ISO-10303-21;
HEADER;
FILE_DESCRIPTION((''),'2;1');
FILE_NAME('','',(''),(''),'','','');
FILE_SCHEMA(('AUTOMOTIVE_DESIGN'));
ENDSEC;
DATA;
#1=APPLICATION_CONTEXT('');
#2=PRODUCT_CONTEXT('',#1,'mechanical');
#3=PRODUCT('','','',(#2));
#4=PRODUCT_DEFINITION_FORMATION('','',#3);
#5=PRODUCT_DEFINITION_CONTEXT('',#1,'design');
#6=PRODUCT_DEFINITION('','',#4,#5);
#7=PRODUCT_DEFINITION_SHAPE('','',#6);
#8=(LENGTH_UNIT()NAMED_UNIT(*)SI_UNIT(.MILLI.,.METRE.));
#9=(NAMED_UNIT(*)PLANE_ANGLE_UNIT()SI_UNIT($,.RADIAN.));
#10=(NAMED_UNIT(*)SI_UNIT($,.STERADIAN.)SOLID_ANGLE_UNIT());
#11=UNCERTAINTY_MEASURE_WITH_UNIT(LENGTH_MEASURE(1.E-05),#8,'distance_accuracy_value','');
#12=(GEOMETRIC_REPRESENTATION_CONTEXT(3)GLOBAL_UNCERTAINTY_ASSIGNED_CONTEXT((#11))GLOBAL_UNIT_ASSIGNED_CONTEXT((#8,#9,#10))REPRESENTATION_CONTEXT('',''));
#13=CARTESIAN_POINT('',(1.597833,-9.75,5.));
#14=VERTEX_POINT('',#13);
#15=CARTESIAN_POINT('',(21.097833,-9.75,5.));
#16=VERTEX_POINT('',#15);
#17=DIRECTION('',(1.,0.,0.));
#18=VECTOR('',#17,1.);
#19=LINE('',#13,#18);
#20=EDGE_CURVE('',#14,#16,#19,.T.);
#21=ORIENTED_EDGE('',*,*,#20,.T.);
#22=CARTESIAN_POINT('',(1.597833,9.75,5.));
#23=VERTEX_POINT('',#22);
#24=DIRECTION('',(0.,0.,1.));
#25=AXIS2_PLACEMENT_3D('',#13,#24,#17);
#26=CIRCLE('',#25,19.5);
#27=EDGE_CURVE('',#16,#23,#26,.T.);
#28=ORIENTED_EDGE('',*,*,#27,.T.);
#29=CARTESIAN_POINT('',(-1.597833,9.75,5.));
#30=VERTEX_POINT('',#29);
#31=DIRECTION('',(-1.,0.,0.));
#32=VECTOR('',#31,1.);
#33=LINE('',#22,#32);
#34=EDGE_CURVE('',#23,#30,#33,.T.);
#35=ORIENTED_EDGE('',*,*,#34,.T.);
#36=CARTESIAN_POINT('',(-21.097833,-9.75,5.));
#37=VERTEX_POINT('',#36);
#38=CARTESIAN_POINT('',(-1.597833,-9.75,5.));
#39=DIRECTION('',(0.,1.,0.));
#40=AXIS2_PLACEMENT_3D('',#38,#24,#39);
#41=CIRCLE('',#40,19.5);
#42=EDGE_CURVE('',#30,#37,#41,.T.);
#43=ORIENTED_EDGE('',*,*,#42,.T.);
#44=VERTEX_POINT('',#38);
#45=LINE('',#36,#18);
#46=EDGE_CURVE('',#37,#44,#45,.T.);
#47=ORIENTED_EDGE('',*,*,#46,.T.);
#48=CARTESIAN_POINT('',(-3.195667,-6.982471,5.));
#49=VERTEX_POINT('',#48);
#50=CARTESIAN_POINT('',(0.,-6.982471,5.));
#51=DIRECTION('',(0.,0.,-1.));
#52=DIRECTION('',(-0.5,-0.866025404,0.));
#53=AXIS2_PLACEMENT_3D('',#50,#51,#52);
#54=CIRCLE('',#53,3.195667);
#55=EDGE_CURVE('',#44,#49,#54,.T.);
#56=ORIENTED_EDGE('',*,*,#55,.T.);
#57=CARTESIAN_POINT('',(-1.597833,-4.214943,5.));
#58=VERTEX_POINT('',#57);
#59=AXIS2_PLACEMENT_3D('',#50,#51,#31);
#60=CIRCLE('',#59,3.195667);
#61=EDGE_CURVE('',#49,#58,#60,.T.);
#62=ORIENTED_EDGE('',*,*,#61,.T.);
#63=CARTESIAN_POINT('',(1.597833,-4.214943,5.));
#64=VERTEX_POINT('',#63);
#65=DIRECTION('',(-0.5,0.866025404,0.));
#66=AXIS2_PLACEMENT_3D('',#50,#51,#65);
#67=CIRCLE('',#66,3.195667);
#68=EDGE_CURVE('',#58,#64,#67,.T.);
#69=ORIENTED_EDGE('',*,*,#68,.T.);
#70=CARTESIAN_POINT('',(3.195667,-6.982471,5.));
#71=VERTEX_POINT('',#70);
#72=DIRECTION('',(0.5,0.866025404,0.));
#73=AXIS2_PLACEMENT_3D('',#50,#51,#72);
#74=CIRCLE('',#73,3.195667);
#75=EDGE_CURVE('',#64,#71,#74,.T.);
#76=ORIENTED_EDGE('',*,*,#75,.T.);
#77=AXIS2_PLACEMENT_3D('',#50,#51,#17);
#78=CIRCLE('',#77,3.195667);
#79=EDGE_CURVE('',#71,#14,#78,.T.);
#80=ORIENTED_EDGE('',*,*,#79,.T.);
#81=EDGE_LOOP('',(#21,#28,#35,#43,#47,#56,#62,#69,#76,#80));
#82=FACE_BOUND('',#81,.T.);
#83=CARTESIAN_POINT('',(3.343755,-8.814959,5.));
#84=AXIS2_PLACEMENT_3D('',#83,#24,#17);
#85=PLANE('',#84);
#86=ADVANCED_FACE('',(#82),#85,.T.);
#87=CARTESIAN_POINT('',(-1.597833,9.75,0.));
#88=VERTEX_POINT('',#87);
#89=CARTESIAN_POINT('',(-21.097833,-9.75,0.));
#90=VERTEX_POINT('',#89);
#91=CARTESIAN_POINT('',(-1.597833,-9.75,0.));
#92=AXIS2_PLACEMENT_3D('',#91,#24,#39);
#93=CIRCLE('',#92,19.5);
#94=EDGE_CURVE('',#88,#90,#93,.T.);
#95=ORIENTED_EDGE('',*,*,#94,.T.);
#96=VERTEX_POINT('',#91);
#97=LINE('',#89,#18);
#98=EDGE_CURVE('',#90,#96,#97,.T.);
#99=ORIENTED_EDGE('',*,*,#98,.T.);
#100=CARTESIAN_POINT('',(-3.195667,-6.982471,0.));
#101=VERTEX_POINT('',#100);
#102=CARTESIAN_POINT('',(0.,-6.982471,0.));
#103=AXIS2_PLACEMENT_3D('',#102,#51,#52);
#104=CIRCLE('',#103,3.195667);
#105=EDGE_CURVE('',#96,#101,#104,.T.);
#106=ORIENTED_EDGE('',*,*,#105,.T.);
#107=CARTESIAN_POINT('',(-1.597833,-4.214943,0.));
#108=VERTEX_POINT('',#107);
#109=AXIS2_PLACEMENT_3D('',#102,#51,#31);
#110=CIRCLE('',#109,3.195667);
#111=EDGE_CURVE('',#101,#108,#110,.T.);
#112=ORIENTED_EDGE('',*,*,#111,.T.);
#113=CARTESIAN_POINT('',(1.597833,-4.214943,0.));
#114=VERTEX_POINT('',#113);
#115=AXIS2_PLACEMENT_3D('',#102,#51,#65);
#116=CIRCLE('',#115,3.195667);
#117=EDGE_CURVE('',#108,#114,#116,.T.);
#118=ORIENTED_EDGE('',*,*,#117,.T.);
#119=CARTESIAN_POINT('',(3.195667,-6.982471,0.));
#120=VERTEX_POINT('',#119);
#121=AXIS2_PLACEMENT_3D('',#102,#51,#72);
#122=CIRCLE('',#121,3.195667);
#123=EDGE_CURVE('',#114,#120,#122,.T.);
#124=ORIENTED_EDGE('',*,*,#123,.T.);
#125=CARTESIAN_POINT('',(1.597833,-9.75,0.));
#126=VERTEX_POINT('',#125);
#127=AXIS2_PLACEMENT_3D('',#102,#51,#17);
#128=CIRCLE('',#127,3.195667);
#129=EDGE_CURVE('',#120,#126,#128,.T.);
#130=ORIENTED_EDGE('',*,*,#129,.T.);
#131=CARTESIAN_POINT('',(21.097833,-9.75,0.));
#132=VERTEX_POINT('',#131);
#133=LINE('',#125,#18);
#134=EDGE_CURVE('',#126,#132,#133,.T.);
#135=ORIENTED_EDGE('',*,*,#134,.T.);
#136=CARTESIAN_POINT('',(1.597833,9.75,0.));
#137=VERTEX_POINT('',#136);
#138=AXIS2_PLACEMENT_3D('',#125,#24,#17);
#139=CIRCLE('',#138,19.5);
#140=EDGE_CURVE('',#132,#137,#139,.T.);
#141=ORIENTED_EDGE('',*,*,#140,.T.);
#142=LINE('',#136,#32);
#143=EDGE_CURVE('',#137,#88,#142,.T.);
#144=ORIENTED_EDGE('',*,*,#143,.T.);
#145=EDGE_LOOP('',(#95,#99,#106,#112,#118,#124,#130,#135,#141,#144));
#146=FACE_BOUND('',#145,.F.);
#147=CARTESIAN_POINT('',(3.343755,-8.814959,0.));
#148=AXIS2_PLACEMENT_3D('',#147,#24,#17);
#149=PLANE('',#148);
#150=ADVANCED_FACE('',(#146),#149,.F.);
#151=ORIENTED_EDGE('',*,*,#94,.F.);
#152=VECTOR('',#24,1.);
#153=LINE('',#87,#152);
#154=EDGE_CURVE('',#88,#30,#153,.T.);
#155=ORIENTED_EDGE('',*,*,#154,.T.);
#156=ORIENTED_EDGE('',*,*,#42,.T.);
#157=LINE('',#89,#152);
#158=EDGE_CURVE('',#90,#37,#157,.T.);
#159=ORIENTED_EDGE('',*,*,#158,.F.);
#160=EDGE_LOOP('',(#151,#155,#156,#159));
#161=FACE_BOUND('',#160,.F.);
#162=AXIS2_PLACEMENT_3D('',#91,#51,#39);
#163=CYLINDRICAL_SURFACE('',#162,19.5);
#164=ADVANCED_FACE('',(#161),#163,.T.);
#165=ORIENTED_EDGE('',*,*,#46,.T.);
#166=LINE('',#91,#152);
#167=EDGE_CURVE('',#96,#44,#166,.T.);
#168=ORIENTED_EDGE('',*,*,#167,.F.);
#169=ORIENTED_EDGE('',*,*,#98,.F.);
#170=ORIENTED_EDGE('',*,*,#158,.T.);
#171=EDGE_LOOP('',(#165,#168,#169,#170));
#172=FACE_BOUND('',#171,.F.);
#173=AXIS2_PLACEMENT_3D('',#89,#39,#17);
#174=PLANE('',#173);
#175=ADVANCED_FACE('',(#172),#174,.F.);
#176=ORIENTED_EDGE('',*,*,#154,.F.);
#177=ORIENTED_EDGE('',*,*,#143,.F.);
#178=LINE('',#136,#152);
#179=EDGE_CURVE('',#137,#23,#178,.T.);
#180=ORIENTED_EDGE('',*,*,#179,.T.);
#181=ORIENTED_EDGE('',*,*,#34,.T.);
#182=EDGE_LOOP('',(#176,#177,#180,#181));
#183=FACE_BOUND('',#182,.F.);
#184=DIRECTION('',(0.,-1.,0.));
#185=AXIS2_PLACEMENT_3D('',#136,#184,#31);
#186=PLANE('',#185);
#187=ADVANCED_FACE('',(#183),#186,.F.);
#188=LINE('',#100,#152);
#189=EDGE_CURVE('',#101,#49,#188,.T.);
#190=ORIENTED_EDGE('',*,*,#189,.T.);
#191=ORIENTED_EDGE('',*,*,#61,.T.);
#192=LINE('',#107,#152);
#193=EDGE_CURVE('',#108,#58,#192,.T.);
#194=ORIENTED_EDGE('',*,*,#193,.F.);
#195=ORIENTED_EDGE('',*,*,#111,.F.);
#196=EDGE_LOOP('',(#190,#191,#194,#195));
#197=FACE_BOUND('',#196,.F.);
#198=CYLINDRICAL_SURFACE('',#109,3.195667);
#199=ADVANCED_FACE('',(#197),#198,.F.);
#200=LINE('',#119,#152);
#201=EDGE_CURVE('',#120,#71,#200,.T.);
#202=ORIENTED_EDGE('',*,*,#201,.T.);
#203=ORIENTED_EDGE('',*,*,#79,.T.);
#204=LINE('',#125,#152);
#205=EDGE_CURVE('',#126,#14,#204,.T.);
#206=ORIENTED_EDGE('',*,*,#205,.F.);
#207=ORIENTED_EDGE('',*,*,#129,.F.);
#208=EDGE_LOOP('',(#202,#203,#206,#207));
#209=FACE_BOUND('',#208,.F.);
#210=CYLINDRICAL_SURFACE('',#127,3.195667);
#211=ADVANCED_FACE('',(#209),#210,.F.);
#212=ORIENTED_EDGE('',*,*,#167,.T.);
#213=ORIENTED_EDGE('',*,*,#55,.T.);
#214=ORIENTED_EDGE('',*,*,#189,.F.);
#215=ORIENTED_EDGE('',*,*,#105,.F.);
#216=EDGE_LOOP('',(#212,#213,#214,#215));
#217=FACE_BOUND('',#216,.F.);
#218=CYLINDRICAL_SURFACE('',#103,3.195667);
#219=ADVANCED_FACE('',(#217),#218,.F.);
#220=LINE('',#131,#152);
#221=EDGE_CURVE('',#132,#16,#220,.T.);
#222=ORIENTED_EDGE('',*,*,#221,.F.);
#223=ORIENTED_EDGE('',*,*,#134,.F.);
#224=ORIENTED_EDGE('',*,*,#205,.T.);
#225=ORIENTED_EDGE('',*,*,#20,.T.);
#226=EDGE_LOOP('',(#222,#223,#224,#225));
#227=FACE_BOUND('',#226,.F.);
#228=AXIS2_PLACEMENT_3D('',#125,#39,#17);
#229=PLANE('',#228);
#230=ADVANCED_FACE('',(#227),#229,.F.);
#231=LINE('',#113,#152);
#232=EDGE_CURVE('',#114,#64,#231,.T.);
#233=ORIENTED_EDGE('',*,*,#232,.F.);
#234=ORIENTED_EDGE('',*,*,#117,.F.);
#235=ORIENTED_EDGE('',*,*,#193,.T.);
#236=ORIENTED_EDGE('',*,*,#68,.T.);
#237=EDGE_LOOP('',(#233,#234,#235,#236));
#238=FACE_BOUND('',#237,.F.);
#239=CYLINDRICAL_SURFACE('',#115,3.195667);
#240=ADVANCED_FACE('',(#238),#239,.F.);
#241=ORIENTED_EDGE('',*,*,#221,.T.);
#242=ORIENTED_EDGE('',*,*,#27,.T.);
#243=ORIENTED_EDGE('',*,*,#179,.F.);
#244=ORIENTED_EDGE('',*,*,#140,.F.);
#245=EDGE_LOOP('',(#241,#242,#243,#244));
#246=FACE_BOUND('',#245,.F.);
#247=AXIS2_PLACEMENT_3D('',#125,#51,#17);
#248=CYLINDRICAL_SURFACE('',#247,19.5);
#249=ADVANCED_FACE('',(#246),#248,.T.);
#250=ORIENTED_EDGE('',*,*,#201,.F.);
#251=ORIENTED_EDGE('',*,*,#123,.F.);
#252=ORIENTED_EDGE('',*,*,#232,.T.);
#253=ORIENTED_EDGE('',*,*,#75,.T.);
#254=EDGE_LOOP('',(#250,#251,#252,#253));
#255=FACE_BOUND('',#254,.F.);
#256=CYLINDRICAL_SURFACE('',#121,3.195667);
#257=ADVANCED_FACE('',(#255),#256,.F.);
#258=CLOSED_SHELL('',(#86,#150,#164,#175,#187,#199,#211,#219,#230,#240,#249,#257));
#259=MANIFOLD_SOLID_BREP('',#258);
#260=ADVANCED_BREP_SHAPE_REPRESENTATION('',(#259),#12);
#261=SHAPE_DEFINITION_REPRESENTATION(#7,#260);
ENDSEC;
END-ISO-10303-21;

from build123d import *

# Parameters (mm, degrees)
F1_DEPTH = 5


with BuildPart() as f1:
    # F0 (on Top) → F1 (new body)
    with BuildSketch(Plane.XY):
        with BuildLine():
            ThreePointArc((3.1956666573, -6.9824714928), (2.7675285072, -8.5803048214), (1.5978333287, -9.75))
            Line((1.5978333287, -9.75), (4.793499986, -9.75))
            ThreePointArc((4.793499986, -9.75), (4.3653618359, -8.1521666713), (3.1956666573, -6.9824714928))
        make_face()
        with BuildLine():
            Line((-4.793499986, -9.75), (-1.5978333286, -9.75))
            ThreePointArc((-1.5978333286, -9.75), (-2.7675285072, -8.5803048214), (-3.1956666573, -6.9824714928))
            ThreePointArc((-3.1956666573, -6.9824714928), (-4.3653618359, -8.1521666713), (-4.793499986, -9.75))
        make_face()
        with BuildLine():
            ThreePointArc((3.1956666573, -6.9824714928), (4.3653618359, -8.1521666713), (4.793499986, -9.75))
            Line((4.793499986, -9.75), (12.3826613305, -9.75))
            Line((12.3826613305, -9.75), (17.9021666714, -9.75))
            ThreePointArc((17.9021666714, -9.75), (13.2777422874, 2.8582215277), (1.5978333286, 9.4863643814))
            Line((1.5978333286, 9.4863643814), (1.5978333287, -4.2149429855))
            ThreePointArc((1.5978333286, -4.2149429855), (2.7675285072, -5.3846381641), (3.1956666573, -6.9824714928))
        make_face()
        with BuildLine():
            Line((-17.9021666713, -9.75), (-4.793499986, -9.75))
            ThreePointArc((-4.793499986, -9.75), (-4.3653618359, -8.1521666713), (-3.1956666573, -6.9824714928))
            ThreePointArc((-3.1956666573, -6.9824714928), (-2.7675285072, -5.3846381641), (-1.5978333287, -4.2149429855))
            Line((-1.5978333286, -4.2149429855), (-1.5978333287, 9.4863643814))
            ThreePointArc((-1.5978333287, 9.4863643814), (-13.2777422874, 2.8582215277), (-17.9021666713, -9.75))
        make_face()
        with BuildLine():
            ThreePointArc((-1.5978333287, -4.2149429855), (0, -3.7868048355), (1.5978333286, -4.2149429855))
            Line((1.5978333287, -4.2149429855), (1.5978333286, 9.4863643814))
            ThreePointArc((1.5978333286, 9.4863643814), (0.8009617163, 9.6018935077), (0, 9.6844263783))
            ThreePointArc((0, 9.6844263783), (-0.8009617163, 9.6018935077), (-1.5978333287, 9.4863643814))
            Line((-1.5978333287, 9.4863643814), (-1.5978333286, -4.2149429855))
        make_face()
        with BuildLine():
            Line((-21.0978333287, -9.75), (-17.9021666713, -9.75))
            ThreePointArc((-17.9021666713, -9.75), (-13.2777422874, 2.8582215277), (-1.5978333287, 9.4863643814))
            Line((-1.5978333287, 9.4863643814), (-1.5978333287, 9.75))
            ThreePointArc((-1.5978333287, 9.75), (-15.3864155618, 4.0385822331), (-21.0978333286, -9.75))
        make_face()
        with BuildLine():
            ThreePointArc((0, 9.6844263783), (0.8009617163, 9.6018935077), (1.5978333286, 9.4863643814))
            Line((1.5978333286, 9.4863643814), (1.5978333286, 9.75))
            ThreePointArc((1.5978333286, 9.75), (0.798244177, 9.7335996979), (0, 9.6844263783))
        make_face()
        with BuildLine():
            Line((1.5978333286, 9.75), (1.5978333286, 9.4863643814))
            ThreePointArc((1.5978333286, 9.4863643814), (13.2777422874, 2.8582215277), (17.9021666714, -9.75))
            Line((17.9021666714, -9.75), (21.0978333287, -9.75))
            ThreePointArc((21.0978333287, -9.75), (15.3864155618, 4.0385822331), (1.5978333286, 9.75))
        make_face()
        with BuildLine():
            Line((-1.5978333287, 9.75), (-1.5978333287, 9.4863643814))
            ThreePointArc((-1.5978333287, 9.4863643814), (-0.8009617163, 9.6018935077), (0, 9.6844263783))
            ThreePointArc((0, 9.6844263783), (-0.798244177, 9.7335996979), (-1.5978333287, 9.75))
        make_face()
        with BuildLine():
            ThreePointArc((0, 9.6844263783), (0.798244177, 9.7335996979), (1.5978333286, 9.75))
            Line((1.5978333286, 9.75), (-1.5978333287, 9.75))
            ThreePointArc((-1.5978333287, 9.75), (-0.798244177, 9.7335996979), (0, 9.6844263783))
        make_face()
    extrude(amount=F1_DEPTH)


solid = f1.part
